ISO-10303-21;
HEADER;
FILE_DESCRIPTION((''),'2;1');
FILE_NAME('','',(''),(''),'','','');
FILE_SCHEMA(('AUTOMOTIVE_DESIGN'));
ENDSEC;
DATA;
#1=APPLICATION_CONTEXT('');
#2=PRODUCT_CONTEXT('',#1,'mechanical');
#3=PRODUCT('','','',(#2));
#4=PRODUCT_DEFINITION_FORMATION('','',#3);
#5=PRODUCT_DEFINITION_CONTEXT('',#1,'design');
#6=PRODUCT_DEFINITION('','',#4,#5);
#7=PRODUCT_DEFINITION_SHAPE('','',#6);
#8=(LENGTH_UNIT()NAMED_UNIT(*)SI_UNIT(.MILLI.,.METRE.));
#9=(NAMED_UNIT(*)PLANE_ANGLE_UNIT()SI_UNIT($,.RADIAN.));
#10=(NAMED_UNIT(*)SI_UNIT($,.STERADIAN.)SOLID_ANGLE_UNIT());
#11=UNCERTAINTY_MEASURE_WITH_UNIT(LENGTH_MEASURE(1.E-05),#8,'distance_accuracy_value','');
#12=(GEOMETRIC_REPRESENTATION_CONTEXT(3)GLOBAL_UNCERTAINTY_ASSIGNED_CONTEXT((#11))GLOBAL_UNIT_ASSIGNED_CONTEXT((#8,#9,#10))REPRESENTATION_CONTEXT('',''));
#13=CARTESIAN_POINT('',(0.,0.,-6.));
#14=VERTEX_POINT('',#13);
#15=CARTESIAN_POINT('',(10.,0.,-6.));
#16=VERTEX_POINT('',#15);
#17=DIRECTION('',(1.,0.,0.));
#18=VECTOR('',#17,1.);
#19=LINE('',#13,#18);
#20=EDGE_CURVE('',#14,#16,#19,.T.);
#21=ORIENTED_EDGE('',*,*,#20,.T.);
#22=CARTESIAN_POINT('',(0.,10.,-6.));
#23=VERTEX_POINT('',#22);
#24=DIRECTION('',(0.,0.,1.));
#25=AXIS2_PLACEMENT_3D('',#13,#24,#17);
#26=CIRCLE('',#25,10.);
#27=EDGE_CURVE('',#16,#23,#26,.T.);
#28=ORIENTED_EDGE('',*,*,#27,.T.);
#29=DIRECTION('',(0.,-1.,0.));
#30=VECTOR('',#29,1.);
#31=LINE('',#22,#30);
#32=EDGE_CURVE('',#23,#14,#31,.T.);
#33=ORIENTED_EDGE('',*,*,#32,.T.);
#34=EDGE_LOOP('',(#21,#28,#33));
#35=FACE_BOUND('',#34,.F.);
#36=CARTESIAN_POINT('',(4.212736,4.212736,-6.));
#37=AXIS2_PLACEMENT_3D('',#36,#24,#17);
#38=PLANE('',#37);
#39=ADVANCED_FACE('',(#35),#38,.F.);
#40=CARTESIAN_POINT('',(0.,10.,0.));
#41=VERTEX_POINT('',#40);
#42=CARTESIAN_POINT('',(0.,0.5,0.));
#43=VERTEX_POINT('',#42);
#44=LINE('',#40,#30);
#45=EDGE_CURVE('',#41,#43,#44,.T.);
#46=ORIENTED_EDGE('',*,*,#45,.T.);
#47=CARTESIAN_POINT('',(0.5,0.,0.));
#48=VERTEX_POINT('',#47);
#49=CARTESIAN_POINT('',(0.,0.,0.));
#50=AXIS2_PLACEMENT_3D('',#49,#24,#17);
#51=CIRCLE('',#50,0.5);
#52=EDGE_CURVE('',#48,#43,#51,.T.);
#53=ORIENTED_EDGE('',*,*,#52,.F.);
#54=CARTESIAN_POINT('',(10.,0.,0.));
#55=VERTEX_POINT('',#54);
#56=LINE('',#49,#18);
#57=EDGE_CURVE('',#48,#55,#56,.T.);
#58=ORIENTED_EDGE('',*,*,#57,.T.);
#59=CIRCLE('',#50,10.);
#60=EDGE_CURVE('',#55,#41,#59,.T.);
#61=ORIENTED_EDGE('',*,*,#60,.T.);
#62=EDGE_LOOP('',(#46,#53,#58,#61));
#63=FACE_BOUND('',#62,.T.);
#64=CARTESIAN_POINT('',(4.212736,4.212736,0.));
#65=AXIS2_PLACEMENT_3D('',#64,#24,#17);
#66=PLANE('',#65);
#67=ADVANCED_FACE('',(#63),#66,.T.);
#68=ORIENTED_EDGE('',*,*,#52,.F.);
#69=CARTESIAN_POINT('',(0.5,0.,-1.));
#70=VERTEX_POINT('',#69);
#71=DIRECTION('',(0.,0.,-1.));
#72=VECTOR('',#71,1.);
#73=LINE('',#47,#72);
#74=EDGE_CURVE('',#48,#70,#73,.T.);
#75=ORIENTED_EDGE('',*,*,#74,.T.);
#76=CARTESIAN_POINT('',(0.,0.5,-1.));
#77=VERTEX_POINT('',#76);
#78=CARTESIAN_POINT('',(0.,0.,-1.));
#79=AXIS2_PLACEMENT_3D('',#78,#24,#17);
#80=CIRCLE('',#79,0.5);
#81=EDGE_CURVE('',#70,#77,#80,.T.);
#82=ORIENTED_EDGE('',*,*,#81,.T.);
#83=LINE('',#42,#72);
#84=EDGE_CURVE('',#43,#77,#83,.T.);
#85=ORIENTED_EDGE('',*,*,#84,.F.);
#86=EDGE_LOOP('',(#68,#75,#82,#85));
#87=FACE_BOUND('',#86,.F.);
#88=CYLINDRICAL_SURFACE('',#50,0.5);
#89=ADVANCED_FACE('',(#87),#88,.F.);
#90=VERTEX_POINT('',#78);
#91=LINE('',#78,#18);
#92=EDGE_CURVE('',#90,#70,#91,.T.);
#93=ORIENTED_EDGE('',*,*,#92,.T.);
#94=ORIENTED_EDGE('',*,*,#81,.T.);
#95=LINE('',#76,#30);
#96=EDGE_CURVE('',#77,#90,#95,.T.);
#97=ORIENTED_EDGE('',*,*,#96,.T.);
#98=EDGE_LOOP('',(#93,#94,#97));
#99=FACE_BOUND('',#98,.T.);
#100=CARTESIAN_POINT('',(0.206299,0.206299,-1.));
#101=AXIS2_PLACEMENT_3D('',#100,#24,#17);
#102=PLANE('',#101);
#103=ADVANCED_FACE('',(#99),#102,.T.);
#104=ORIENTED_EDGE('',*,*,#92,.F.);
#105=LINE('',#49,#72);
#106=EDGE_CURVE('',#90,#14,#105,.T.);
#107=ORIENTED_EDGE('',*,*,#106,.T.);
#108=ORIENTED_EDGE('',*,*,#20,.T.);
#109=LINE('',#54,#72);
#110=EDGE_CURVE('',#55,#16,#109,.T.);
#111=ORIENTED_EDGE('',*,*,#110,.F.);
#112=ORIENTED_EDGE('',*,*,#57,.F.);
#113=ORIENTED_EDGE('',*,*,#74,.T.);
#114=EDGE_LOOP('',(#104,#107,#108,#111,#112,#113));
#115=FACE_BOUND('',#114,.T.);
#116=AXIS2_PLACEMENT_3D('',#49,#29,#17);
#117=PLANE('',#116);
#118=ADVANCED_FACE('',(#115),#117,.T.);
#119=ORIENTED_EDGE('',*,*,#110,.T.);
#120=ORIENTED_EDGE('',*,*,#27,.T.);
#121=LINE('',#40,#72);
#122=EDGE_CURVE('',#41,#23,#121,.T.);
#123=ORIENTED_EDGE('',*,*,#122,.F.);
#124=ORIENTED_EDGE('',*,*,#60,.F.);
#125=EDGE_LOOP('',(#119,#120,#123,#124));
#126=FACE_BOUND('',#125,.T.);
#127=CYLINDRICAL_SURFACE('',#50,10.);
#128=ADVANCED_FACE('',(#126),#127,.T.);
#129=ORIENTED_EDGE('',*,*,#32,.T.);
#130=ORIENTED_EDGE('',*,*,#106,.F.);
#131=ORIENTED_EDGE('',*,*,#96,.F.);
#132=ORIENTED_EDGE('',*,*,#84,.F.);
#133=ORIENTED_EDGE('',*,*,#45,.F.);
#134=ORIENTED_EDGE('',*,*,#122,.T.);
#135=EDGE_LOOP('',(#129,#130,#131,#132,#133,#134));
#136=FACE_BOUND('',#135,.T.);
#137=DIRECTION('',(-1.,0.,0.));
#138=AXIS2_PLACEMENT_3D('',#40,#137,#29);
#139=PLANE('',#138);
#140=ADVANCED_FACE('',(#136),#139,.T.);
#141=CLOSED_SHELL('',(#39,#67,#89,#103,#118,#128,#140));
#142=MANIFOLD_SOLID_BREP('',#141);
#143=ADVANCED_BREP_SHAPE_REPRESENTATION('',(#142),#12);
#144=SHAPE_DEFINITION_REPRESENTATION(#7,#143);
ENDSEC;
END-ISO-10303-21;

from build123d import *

# Parameters (mm, degrees)
F3_DEPTH = 6
F4_DEPTH = 1


# Not quite as in the source:
# - a feature of the source that left no trace in its solid (it failed there, or was rolled back) is left out


with BuildPart() as f3:
    # F0 (on Top) → F3 (new body)
    with BuildSketch(Plane.XY):
        with BuildLine():
            ThreePointArc((0, 1.25), (0.8838834765, 0.8838834765), (1.25, 0))
            Line((1.25, 0), (10, 0))
            ThreePointArc((10, 0), (7.0710678119, 7.0710678119), (0, 10))
            Line((0, 10), (0, 1.25))
        make_face()
        with BuildLine():
            ThreePointArc((0, 0.5), (0.3535533906, 0.3535533906), (0.5, 0))
            Line((0.5, 0), (1.25, 0))
            ThreePointArc((1.25, 0), (0.8838834765, 0.8838834765), (0, 1.25))
            Line((0, 1.25), (0, 0.5))
        make_face()
        with BuildLine():
            Line((0, 0), (0.5, 0))
            ThreePointArc((0.5, 0), (0.3535533906, 0.3535533906), (0, 0.5))
            Line((0, 0.5), (0, 0))
        make_face()
    extrude(amount=-F3_DEPTH)

    # F0 (on Top) → F4 (cut)
    with BuildSketch(Plane.XY):
        with BuildLine():
            Line((0, 0), (0.5, 0))
            ThreePointArc((0.5, 0), (0.3535533906, 0.3535533906), (0, 0.5))
            Line((0, 0.5), (0, 0))
        make_face()
    extrude(amount=-F4_DEPTH, mode=Mode.SUBTRACT)


solid = f3.part
